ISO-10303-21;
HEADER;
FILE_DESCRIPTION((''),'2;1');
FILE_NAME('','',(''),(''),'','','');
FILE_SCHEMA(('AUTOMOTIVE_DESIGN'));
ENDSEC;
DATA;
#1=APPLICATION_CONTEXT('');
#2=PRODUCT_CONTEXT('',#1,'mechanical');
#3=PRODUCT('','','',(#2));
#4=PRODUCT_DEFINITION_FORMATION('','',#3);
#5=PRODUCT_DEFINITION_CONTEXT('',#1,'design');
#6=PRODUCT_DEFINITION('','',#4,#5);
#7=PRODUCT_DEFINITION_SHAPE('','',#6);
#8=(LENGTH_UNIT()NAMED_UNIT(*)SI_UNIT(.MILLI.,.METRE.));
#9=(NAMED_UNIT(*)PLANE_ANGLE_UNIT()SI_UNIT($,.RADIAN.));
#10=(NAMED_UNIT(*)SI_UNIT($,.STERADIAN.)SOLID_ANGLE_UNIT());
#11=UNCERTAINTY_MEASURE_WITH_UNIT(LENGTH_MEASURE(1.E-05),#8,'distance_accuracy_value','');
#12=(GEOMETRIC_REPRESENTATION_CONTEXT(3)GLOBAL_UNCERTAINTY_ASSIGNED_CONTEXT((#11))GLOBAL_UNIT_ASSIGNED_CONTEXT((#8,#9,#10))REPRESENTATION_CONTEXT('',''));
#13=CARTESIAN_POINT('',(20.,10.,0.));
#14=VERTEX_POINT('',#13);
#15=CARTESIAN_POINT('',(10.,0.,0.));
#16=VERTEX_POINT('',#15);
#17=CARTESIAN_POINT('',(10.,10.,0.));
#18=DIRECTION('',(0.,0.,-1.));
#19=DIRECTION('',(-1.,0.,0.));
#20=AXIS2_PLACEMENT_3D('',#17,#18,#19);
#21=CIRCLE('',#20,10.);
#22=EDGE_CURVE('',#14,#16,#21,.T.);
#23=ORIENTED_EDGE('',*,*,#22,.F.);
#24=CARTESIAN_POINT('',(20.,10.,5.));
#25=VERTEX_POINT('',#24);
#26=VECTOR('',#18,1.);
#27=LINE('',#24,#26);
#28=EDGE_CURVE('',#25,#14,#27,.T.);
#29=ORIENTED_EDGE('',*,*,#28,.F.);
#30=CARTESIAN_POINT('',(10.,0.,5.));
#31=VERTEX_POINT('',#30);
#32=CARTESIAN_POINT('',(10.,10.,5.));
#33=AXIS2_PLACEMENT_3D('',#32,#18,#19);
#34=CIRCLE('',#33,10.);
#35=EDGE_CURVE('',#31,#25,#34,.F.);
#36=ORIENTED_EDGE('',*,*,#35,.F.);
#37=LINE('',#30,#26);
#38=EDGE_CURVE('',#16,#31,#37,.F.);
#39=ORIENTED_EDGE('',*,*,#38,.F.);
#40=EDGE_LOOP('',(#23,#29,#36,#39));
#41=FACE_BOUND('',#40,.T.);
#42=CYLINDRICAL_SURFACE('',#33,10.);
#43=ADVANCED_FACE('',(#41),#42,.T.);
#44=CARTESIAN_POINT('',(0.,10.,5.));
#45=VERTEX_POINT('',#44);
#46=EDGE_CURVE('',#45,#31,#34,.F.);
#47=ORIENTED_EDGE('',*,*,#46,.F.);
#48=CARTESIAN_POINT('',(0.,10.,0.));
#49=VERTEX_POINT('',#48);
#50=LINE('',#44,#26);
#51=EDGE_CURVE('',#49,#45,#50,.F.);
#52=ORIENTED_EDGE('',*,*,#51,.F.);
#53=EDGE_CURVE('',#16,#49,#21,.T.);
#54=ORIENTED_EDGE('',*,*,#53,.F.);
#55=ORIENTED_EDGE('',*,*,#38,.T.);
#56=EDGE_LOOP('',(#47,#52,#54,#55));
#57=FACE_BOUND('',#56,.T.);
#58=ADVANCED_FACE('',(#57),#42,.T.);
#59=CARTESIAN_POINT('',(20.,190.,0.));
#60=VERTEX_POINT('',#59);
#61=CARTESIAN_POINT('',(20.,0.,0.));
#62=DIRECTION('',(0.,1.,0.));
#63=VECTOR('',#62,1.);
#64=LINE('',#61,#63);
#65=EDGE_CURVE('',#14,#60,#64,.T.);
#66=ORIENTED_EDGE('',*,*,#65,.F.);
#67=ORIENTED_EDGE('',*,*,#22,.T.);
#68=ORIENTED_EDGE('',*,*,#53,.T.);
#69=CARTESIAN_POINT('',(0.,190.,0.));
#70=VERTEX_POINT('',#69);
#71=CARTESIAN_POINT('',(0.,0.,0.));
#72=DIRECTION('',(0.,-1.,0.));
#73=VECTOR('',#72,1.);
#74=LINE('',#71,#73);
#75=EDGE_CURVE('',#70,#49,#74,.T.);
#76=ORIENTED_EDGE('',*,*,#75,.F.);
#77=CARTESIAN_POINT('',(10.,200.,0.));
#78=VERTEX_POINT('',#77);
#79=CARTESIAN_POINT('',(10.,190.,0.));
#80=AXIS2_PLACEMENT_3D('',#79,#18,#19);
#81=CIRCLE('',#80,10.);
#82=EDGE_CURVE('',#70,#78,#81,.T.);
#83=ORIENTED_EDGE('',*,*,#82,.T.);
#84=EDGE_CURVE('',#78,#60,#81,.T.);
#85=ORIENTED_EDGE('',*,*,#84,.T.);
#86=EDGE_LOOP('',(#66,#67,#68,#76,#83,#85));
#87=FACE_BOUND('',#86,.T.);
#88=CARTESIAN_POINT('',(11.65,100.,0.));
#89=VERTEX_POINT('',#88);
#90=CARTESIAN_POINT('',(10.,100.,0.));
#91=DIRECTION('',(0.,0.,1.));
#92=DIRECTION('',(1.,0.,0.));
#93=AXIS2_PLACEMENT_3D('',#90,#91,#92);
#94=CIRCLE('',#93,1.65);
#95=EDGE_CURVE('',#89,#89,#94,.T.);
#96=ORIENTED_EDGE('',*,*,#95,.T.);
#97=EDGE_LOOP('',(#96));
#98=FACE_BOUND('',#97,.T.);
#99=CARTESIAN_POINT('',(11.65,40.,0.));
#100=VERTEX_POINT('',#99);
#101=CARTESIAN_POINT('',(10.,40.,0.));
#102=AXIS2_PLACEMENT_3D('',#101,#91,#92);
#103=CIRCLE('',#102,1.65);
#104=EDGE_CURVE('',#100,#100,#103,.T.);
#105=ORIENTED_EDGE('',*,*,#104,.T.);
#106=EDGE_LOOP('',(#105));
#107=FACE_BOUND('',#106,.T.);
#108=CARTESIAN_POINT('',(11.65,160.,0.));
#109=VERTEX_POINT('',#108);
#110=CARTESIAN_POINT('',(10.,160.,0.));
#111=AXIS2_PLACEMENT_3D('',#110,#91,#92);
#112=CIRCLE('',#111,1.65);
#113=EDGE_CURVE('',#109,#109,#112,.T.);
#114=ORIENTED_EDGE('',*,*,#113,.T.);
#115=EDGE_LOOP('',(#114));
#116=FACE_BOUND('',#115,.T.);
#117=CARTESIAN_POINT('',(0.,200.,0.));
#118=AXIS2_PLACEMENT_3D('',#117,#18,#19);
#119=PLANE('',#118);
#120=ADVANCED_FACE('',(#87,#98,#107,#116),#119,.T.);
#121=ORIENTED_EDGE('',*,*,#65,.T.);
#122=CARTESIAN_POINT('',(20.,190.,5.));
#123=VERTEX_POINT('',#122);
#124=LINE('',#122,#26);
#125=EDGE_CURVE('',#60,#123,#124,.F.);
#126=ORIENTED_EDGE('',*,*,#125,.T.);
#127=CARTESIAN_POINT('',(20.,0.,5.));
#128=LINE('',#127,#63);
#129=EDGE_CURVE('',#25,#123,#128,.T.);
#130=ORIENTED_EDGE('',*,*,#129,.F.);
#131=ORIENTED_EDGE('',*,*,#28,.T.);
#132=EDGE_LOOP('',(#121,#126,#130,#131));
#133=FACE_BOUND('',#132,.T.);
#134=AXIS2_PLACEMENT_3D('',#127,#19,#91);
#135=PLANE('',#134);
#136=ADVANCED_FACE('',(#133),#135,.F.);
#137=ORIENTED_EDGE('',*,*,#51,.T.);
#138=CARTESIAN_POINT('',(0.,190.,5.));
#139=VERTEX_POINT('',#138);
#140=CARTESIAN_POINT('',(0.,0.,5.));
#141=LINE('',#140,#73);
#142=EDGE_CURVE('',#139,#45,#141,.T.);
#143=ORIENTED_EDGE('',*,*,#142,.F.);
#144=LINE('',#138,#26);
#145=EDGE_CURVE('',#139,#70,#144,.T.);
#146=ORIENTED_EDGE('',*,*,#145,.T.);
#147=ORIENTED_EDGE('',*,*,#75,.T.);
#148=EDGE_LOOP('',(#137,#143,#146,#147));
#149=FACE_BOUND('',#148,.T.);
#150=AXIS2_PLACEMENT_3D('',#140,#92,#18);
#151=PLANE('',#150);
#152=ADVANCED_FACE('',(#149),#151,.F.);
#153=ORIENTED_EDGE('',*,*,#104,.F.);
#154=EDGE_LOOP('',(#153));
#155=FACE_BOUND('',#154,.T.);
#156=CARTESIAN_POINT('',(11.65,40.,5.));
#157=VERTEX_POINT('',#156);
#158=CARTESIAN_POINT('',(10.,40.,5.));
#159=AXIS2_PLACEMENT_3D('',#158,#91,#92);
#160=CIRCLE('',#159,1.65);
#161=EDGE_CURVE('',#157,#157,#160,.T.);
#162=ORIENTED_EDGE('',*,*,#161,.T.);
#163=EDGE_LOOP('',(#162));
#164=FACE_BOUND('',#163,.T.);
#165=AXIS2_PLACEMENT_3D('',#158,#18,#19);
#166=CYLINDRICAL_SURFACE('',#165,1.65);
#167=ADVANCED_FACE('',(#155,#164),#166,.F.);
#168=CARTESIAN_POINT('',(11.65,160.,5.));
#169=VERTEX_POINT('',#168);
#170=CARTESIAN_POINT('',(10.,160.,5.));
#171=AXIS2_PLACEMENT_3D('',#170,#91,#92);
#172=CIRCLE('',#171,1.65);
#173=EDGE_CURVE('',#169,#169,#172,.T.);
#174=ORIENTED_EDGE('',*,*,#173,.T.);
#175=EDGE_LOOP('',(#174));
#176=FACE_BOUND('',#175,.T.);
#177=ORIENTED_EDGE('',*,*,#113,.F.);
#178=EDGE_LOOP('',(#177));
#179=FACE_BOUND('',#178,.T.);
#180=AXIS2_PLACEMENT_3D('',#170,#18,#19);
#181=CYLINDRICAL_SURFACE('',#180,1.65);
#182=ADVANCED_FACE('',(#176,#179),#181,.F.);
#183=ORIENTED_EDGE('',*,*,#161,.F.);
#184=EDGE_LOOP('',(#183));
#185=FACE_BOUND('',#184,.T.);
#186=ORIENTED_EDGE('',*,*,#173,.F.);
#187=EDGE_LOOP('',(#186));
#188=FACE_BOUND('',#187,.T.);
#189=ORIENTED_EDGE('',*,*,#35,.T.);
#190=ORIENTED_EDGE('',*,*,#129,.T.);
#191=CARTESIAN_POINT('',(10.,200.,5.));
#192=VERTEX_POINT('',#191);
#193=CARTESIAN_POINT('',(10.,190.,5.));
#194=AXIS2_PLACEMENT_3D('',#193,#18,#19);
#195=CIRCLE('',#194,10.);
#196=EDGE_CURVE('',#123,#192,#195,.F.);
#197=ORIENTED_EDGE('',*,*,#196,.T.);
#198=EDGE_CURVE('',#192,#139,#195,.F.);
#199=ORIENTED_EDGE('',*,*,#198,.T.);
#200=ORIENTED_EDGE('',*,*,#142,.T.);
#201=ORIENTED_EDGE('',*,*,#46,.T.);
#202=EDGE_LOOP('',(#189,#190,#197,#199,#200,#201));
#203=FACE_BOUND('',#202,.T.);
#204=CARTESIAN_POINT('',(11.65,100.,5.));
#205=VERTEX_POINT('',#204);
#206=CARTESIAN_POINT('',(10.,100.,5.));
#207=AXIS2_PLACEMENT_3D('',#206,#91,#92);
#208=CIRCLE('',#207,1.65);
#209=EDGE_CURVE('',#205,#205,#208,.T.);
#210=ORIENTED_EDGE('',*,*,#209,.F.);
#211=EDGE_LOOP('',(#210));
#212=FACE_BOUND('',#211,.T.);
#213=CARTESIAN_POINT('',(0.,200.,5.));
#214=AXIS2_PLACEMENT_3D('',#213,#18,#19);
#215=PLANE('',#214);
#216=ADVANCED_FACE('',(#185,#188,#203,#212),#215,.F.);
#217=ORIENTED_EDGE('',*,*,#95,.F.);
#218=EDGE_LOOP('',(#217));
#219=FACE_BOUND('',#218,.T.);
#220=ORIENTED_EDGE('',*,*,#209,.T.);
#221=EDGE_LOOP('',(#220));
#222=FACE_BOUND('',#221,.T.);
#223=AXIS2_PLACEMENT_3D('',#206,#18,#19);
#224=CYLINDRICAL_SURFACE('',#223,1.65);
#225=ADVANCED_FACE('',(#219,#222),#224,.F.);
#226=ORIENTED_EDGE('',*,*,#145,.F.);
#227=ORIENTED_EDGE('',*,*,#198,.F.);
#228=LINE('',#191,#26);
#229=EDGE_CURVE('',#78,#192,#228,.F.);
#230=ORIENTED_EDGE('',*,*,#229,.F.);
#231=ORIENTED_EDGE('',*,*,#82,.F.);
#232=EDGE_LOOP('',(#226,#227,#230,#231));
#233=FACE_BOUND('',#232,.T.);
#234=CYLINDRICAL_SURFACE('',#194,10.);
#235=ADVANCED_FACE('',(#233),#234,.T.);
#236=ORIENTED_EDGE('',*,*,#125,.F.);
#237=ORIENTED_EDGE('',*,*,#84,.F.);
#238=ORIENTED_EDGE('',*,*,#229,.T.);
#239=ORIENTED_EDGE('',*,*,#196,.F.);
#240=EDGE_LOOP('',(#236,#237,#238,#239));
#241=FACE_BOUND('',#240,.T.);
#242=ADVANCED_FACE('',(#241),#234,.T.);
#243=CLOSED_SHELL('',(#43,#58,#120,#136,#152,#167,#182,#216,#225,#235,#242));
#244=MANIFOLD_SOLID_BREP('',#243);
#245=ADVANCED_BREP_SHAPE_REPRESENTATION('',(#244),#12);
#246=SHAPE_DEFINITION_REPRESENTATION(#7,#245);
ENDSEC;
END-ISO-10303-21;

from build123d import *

# Parameters (mm, degrees)
SKETCH1_W           = 20
SKETCH1_H           = 200
SKETCH1_R           = 1.65
BOSS_EXTRUDE1_DEPTH = 5
FILLET1_R           = 10


with BuildPart() as part:
    # Sketch1 → Boss-Extrude1 (new body)
    with BuildSketch(Plane.XY):
        with Locations((10, 100)):
            Rectangle(SKETCH1_W, SKETCH1_H)
        with Locations((10, 160)):
            Circle(SKETCH1_R, mode=Mode.SUBTRACT)
        with Locations((10, 100)):
            Circle(SKETCH1_R, mode=Mode.SUBTRACT)
        with Locations((10, 40)):
            Circle(SKETCH1_R, mode=Mode.SUBTRACT)
    extrude(amount=BOSS_EXTRUDE1_DEPTH)

    # Fillet1
    fillet1_edges = [part.edges().sort_by_distance(p)[0] for p in [
        (0, 0, 2.5),
        (20, 0, 2.5),
        (20, 200, 2.5),
        (0, 200, 2.5),
    ]]
    fillet(fillet1_edges, radius=FILLET1_R - 0.0001)  # a hair under: the kernel refuses the full size


solid = part.part
